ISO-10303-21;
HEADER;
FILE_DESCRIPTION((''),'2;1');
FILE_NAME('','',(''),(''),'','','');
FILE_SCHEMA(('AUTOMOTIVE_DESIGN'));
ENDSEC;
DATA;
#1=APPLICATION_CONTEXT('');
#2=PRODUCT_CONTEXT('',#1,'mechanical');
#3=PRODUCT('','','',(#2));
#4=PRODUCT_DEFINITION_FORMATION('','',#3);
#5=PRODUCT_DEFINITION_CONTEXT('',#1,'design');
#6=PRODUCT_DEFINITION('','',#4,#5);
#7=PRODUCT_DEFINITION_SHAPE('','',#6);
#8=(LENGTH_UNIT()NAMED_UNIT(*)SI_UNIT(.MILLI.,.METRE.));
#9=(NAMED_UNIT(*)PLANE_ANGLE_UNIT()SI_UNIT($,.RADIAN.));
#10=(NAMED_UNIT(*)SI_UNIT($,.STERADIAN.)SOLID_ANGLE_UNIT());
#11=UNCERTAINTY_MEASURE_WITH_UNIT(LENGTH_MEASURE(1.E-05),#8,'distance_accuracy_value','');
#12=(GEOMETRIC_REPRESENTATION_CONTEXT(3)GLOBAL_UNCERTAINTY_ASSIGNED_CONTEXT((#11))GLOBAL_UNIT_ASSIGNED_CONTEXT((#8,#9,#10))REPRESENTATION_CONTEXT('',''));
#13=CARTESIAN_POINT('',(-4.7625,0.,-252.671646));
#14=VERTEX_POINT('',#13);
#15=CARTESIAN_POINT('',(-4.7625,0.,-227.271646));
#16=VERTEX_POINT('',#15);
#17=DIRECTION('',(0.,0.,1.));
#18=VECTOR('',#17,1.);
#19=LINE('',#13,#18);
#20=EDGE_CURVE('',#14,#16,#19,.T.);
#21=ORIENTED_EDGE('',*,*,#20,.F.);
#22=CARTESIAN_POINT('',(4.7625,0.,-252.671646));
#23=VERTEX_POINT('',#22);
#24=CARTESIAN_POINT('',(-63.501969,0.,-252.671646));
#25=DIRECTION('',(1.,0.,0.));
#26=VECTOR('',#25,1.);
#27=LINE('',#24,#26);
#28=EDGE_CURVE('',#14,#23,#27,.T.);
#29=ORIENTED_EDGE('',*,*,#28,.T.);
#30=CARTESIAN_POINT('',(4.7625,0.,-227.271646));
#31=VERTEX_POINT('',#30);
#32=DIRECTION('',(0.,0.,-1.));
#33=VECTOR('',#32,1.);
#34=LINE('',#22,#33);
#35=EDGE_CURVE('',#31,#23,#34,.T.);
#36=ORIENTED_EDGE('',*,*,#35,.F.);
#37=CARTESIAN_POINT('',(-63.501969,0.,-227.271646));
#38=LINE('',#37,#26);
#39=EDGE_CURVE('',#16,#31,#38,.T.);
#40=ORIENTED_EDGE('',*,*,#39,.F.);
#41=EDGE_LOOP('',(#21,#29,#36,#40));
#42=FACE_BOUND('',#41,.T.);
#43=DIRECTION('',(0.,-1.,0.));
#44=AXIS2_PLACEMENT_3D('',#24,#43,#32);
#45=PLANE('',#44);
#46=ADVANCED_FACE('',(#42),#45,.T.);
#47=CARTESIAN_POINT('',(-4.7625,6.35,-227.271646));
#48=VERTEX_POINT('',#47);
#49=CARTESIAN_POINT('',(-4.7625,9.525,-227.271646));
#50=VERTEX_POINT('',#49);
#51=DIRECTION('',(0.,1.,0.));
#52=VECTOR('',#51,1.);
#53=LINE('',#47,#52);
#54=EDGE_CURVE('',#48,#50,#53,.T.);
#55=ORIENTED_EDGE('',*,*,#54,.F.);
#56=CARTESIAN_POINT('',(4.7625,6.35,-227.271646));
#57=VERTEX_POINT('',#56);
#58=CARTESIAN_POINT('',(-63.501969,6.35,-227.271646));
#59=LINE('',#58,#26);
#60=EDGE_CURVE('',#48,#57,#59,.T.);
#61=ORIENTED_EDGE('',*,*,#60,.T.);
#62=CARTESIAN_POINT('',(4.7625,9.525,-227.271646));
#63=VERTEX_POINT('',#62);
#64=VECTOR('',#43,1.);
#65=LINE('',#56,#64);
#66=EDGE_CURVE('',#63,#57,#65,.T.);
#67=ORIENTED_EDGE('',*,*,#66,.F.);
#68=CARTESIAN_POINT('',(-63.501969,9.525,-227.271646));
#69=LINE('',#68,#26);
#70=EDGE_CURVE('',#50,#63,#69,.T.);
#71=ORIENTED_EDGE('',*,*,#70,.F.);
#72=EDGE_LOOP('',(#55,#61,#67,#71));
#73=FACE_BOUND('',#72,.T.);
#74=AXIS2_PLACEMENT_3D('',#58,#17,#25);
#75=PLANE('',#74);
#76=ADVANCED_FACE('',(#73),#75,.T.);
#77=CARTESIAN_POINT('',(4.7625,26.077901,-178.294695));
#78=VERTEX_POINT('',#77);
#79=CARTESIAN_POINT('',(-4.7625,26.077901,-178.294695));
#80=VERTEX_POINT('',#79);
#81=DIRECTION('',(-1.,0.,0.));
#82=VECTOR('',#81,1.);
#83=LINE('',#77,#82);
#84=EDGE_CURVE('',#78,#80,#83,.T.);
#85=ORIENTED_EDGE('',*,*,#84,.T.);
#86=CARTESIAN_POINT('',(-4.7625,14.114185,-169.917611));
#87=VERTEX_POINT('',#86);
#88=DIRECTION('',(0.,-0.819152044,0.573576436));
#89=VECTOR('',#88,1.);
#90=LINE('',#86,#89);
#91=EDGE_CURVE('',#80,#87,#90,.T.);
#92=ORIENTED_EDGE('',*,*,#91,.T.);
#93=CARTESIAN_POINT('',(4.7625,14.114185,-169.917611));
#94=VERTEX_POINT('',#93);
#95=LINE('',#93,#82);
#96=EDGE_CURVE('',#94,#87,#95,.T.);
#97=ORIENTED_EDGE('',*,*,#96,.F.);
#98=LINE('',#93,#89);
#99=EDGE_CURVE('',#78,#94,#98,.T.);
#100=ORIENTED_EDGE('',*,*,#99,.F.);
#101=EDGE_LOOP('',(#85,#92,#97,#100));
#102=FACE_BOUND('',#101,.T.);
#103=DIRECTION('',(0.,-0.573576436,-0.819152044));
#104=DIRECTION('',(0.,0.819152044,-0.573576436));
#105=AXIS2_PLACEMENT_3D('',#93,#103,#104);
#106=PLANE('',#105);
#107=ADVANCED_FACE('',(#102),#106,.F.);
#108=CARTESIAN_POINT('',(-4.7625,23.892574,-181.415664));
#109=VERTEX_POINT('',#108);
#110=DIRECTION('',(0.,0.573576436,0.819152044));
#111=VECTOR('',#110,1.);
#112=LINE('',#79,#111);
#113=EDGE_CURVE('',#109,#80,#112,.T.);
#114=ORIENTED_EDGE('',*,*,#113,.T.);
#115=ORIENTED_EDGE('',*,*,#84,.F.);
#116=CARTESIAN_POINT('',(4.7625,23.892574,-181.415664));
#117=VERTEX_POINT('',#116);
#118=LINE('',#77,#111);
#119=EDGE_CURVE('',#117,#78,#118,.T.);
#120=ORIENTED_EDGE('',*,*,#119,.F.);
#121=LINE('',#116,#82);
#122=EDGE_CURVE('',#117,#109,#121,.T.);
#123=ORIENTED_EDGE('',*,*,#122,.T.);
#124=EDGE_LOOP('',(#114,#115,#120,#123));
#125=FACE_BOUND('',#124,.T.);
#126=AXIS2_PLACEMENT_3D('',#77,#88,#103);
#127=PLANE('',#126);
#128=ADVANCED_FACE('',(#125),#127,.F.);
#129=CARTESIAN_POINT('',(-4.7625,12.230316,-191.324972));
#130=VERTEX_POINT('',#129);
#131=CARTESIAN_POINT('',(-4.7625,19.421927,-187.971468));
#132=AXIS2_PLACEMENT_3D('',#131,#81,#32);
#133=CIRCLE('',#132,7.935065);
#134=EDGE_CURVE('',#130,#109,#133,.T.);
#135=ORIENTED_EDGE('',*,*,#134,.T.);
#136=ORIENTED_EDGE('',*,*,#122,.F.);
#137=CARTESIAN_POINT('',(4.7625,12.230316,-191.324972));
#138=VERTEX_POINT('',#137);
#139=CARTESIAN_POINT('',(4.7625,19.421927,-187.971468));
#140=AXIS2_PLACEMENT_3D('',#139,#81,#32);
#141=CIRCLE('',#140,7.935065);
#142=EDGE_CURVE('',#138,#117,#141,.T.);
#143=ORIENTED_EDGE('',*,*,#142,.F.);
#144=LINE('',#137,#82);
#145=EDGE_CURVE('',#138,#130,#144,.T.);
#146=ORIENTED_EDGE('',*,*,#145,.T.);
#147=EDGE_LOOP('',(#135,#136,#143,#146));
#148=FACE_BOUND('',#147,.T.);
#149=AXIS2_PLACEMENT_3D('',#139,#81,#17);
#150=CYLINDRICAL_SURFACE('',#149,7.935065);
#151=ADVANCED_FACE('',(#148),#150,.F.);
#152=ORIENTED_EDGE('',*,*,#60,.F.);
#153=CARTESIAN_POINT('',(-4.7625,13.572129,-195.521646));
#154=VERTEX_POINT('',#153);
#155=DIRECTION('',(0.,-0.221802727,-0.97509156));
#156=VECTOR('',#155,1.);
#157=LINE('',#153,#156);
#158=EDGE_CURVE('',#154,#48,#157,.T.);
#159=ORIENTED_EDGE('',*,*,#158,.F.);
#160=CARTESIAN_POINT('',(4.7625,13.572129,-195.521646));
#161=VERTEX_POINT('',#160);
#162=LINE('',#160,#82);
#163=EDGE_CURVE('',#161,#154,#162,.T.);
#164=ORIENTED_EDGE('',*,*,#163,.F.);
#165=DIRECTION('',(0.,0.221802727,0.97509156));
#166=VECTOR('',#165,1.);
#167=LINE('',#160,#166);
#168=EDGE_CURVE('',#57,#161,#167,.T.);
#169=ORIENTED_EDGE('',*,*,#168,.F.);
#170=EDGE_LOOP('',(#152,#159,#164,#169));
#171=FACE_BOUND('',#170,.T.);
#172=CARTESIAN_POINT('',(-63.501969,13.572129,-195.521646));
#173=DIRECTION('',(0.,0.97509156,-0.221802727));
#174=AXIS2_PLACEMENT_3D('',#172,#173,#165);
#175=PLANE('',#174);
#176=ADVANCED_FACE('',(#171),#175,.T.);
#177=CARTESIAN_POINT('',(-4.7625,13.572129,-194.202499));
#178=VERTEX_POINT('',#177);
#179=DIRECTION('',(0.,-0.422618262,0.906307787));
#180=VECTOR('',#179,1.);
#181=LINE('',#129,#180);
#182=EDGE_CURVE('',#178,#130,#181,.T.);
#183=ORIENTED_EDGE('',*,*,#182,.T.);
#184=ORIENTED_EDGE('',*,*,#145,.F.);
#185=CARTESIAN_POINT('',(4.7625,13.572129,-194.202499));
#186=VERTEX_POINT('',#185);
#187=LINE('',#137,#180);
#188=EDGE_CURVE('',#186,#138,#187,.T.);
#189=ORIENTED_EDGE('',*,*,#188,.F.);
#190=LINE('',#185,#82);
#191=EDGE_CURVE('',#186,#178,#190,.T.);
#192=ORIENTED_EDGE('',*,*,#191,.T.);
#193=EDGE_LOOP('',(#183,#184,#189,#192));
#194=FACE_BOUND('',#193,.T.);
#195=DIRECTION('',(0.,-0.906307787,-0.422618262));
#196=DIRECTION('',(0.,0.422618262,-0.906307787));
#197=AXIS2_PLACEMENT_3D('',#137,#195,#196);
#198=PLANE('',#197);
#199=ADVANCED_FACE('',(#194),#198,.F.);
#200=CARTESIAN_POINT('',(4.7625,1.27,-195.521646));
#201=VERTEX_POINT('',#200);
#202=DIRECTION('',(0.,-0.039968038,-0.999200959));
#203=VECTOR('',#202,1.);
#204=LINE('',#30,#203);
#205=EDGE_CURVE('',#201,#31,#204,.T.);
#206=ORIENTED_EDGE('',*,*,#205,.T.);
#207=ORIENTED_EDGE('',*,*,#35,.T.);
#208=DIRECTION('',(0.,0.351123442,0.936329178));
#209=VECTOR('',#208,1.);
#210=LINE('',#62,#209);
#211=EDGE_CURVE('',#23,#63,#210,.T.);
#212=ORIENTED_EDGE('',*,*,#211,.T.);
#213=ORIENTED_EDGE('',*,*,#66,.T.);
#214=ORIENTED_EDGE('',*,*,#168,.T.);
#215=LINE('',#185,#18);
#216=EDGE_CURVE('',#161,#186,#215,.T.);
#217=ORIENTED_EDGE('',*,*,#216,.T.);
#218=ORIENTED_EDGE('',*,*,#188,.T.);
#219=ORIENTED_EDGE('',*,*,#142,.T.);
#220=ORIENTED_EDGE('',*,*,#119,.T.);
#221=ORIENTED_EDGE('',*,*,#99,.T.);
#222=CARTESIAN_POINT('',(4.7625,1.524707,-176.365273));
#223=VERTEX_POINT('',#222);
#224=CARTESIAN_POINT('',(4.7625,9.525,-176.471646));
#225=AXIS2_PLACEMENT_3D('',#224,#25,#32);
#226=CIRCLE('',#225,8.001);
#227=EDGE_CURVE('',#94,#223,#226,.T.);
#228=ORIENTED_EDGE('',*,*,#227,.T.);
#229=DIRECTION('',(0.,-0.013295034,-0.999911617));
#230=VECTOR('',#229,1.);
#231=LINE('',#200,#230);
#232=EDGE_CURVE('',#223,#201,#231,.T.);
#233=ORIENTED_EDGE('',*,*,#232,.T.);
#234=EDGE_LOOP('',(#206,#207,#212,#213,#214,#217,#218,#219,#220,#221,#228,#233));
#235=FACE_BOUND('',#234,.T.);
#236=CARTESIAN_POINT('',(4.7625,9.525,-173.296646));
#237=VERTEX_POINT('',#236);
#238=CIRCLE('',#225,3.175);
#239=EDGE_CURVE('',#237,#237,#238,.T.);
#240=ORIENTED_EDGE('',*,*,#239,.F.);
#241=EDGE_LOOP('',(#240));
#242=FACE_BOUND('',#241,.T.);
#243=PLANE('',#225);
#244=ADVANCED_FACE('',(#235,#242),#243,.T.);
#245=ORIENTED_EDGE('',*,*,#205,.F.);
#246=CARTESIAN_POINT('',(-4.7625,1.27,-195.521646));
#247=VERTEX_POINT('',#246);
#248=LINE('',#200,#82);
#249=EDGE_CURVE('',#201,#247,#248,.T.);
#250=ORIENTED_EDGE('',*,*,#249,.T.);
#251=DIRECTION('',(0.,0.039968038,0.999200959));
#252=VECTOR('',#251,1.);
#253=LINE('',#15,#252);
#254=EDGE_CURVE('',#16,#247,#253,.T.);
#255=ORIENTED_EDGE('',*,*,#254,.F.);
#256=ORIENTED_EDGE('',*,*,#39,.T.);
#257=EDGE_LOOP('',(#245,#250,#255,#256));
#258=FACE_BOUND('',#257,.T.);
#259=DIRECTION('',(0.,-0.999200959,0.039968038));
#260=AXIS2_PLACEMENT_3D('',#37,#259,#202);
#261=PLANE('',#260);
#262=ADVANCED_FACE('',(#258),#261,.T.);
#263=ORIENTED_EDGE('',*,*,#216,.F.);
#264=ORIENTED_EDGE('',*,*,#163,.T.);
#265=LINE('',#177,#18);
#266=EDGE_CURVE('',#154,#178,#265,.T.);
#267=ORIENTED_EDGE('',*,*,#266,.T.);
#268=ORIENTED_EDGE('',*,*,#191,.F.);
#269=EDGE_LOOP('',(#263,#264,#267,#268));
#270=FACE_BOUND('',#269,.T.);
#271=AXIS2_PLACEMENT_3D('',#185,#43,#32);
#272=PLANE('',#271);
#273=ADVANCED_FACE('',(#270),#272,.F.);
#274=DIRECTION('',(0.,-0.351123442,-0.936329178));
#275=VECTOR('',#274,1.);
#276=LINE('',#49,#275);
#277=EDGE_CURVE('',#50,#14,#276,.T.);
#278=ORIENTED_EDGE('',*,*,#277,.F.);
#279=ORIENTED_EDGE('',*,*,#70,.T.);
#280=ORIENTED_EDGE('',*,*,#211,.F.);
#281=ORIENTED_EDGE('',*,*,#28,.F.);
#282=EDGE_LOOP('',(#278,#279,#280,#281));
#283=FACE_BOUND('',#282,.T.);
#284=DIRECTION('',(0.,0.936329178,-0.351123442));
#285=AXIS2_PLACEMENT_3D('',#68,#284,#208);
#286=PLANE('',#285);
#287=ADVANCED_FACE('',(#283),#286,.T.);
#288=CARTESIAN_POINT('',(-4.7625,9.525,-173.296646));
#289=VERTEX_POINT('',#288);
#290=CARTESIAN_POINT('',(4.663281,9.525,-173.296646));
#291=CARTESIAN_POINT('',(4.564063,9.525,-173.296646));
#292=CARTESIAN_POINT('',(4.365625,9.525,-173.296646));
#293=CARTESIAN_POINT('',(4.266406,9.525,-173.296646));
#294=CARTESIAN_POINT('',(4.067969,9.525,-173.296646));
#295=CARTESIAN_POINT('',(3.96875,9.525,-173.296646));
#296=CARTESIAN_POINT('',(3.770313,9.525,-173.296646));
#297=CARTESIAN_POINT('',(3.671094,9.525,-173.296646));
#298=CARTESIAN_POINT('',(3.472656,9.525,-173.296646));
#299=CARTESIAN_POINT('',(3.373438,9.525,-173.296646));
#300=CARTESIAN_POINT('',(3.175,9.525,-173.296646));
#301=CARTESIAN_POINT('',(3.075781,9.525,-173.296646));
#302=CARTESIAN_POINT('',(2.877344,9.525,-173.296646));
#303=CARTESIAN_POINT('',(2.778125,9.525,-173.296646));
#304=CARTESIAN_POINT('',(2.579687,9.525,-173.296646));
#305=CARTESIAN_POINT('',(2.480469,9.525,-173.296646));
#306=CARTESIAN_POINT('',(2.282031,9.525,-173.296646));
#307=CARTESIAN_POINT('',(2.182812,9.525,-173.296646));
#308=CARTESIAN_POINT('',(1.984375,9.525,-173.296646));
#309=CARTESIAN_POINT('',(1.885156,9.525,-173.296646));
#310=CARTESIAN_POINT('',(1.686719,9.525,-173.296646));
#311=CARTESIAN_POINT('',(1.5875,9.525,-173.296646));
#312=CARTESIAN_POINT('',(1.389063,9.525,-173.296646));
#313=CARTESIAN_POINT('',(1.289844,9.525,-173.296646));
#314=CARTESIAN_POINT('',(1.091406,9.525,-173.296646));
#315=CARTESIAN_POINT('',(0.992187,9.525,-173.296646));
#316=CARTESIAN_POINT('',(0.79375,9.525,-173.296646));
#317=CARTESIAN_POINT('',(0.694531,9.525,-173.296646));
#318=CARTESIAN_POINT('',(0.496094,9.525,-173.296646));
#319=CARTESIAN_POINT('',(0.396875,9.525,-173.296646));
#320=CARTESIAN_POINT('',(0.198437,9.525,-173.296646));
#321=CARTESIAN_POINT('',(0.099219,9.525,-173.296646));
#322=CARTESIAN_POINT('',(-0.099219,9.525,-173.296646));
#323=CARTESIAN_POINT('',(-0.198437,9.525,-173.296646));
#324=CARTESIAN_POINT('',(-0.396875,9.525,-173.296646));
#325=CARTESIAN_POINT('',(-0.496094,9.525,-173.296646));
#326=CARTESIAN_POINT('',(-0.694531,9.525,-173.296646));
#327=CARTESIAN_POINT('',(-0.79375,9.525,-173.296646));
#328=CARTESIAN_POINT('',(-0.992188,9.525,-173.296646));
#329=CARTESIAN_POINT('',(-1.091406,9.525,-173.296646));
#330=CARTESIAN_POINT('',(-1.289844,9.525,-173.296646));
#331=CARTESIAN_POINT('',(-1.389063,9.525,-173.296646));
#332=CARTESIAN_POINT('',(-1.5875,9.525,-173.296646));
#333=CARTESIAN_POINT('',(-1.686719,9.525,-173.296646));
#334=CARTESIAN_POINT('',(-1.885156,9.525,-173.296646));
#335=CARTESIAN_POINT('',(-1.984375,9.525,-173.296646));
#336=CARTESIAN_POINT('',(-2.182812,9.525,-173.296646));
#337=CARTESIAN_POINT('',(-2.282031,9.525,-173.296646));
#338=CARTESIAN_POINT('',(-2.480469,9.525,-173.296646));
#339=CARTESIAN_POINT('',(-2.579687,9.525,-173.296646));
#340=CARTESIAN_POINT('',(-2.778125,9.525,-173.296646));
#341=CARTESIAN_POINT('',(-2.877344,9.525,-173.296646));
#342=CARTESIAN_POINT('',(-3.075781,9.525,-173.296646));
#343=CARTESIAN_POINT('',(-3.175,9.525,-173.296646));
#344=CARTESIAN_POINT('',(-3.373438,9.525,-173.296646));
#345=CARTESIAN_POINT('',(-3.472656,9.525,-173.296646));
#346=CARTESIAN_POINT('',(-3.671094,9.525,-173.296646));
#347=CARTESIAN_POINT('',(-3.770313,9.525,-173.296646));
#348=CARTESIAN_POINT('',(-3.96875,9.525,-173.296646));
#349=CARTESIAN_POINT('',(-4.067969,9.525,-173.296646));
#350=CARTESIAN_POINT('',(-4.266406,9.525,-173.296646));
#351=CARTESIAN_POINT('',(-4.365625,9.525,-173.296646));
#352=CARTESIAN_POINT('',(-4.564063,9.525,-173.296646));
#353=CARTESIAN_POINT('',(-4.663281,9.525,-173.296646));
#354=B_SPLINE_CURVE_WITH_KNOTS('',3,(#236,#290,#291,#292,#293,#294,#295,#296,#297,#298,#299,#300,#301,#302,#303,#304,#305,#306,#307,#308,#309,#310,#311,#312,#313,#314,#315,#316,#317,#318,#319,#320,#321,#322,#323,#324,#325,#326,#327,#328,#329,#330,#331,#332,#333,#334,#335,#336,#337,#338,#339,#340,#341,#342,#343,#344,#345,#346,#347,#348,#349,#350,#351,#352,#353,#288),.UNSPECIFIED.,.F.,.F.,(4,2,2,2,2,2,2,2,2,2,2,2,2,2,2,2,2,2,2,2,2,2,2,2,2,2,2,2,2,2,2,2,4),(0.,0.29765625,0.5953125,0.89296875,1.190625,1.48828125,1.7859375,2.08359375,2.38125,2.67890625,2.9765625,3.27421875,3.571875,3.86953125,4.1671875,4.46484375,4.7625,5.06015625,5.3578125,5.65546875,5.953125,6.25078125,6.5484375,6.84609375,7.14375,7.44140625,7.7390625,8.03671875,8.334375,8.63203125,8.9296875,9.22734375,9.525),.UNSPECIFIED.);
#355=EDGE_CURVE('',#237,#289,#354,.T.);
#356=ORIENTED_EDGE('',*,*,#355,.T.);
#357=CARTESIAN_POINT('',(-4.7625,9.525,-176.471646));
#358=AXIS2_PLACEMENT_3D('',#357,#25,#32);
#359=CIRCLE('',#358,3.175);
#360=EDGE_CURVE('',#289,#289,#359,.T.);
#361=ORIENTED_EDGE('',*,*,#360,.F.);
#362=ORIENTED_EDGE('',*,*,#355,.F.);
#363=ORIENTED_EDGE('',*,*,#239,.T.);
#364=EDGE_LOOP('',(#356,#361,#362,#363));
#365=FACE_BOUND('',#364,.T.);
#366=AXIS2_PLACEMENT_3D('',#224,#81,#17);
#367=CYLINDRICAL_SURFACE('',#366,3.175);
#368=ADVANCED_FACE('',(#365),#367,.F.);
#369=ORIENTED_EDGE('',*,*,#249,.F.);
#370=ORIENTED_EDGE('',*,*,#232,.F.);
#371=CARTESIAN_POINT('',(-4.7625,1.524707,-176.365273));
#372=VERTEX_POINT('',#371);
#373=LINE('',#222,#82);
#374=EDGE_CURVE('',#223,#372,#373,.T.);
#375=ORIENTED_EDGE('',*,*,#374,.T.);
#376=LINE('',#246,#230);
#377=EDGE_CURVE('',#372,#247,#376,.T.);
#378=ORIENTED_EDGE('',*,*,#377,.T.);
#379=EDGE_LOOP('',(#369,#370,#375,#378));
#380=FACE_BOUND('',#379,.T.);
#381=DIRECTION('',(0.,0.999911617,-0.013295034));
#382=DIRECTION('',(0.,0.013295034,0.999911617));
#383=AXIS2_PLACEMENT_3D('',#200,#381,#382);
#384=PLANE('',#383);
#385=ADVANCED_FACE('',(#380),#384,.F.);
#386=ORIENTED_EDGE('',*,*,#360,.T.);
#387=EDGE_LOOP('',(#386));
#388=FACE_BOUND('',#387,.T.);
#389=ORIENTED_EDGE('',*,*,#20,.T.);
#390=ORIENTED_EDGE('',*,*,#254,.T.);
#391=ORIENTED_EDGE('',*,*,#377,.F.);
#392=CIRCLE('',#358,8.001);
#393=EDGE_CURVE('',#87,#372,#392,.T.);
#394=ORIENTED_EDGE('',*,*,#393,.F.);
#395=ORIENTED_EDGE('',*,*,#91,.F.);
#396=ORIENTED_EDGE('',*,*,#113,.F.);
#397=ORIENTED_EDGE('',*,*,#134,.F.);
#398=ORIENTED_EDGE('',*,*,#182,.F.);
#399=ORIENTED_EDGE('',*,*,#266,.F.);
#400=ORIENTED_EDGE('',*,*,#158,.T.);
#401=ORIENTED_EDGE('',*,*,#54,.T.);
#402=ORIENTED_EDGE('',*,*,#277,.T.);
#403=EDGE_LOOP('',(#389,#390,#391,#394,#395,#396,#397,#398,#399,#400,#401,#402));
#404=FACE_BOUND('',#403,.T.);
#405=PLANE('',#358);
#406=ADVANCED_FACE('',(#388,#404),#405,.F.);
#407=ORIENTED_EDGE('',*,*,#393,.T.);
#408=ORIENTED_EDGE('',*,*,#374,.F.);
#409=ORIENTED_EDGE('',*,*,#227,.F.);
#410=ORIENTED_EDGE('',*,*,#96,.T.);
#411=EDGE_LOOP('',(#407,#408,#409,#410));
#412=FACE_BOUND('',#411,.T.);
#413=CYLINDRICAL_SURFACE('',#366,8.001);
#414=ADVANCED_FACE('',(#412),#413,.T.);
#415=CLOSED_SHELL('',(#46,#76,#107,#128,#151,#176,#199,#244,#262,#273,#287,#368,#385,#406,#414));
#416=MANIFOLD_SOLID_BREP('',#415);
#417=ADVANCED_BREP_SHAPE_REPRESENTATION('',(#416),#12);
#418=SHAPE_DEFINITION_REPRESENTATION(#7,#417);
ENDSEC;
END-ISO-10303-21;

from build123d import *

# Parameters (mm, degrees)
STOCK_HAMMERSAW_START                 = -4.7625
STOCK_HAMMERSAW_MULTIBODY_1_OUTLINE_R = 3.175
STOCK_HAMMERSAW_MULTIBODY_1_DEPTH     = 9.525
BOSS_EXTRUDE3_DEPTH                   = 9.525


# Read off the part's stored shape, not the designer's step: Stock-HammerSaw Multibody-1
with BuildPart() as part:
    # Stock-HammerSaw Multibody-1 outline → Stock-HammerSaw Multibody-1 (new body)
    with BuildSketch(Plane.YZ.offset(STOCK_HAMMERSAW_START)):
        with BuildLine():
            ThreePointArc((14.114185067, -169.917610968), (5.877809274, -169.350270146), (1.524707151, -176.365272906))
            Line((1.524707151, -176.365272906), (1.27, -195.521646474))
            Line((1.27, -195.521646474), (13.572128535, -195.521646474))
            Line((13.572128535, -195.521646474), (13.572128535, -194.202498844))
            Line((13.572128535, -194.202498844), (12.230315554, -191.32497162))
            ThreePointArc((12.230315554, -191.32497162), (14.283881996, -181.92450591), (23.892574452, -181.415664109))
            Line((23.892574452, -181.415664109), (26.077900674, -178.294694821))
            Line((26.077900674, -178.294694821), (14.114185067, -169.917610968))
        make_face()
        with Locations((9.525, -176.471646474)):
            Circle(STOCK_HAMMERSAW_MULTIBODY_1_OUTLINE_R, mode=Mode.SUBTRACT)
    extrude(amount=STOCK_HAMMERSAW_MULTIBODY_1_DEPTH)

    # Sketch3 → Boss-Extrude3 (add)
    with BuildSketch(Plane(origin=(4.7625, 0, 0), x_dir=(0, 0, -1), z_dir=(1, 0, 0))):
        Polygon((195.521646474, 13.572128535), (227.271646474, 6.35), (227.271646474, 9.525), (252.671646474, 0), (227.271646474, 0), (195.521646474, 1.27), align=None)
    extrude(amount=-BOSS_EXTRUDE3_DEPTH)


solid = part.part
